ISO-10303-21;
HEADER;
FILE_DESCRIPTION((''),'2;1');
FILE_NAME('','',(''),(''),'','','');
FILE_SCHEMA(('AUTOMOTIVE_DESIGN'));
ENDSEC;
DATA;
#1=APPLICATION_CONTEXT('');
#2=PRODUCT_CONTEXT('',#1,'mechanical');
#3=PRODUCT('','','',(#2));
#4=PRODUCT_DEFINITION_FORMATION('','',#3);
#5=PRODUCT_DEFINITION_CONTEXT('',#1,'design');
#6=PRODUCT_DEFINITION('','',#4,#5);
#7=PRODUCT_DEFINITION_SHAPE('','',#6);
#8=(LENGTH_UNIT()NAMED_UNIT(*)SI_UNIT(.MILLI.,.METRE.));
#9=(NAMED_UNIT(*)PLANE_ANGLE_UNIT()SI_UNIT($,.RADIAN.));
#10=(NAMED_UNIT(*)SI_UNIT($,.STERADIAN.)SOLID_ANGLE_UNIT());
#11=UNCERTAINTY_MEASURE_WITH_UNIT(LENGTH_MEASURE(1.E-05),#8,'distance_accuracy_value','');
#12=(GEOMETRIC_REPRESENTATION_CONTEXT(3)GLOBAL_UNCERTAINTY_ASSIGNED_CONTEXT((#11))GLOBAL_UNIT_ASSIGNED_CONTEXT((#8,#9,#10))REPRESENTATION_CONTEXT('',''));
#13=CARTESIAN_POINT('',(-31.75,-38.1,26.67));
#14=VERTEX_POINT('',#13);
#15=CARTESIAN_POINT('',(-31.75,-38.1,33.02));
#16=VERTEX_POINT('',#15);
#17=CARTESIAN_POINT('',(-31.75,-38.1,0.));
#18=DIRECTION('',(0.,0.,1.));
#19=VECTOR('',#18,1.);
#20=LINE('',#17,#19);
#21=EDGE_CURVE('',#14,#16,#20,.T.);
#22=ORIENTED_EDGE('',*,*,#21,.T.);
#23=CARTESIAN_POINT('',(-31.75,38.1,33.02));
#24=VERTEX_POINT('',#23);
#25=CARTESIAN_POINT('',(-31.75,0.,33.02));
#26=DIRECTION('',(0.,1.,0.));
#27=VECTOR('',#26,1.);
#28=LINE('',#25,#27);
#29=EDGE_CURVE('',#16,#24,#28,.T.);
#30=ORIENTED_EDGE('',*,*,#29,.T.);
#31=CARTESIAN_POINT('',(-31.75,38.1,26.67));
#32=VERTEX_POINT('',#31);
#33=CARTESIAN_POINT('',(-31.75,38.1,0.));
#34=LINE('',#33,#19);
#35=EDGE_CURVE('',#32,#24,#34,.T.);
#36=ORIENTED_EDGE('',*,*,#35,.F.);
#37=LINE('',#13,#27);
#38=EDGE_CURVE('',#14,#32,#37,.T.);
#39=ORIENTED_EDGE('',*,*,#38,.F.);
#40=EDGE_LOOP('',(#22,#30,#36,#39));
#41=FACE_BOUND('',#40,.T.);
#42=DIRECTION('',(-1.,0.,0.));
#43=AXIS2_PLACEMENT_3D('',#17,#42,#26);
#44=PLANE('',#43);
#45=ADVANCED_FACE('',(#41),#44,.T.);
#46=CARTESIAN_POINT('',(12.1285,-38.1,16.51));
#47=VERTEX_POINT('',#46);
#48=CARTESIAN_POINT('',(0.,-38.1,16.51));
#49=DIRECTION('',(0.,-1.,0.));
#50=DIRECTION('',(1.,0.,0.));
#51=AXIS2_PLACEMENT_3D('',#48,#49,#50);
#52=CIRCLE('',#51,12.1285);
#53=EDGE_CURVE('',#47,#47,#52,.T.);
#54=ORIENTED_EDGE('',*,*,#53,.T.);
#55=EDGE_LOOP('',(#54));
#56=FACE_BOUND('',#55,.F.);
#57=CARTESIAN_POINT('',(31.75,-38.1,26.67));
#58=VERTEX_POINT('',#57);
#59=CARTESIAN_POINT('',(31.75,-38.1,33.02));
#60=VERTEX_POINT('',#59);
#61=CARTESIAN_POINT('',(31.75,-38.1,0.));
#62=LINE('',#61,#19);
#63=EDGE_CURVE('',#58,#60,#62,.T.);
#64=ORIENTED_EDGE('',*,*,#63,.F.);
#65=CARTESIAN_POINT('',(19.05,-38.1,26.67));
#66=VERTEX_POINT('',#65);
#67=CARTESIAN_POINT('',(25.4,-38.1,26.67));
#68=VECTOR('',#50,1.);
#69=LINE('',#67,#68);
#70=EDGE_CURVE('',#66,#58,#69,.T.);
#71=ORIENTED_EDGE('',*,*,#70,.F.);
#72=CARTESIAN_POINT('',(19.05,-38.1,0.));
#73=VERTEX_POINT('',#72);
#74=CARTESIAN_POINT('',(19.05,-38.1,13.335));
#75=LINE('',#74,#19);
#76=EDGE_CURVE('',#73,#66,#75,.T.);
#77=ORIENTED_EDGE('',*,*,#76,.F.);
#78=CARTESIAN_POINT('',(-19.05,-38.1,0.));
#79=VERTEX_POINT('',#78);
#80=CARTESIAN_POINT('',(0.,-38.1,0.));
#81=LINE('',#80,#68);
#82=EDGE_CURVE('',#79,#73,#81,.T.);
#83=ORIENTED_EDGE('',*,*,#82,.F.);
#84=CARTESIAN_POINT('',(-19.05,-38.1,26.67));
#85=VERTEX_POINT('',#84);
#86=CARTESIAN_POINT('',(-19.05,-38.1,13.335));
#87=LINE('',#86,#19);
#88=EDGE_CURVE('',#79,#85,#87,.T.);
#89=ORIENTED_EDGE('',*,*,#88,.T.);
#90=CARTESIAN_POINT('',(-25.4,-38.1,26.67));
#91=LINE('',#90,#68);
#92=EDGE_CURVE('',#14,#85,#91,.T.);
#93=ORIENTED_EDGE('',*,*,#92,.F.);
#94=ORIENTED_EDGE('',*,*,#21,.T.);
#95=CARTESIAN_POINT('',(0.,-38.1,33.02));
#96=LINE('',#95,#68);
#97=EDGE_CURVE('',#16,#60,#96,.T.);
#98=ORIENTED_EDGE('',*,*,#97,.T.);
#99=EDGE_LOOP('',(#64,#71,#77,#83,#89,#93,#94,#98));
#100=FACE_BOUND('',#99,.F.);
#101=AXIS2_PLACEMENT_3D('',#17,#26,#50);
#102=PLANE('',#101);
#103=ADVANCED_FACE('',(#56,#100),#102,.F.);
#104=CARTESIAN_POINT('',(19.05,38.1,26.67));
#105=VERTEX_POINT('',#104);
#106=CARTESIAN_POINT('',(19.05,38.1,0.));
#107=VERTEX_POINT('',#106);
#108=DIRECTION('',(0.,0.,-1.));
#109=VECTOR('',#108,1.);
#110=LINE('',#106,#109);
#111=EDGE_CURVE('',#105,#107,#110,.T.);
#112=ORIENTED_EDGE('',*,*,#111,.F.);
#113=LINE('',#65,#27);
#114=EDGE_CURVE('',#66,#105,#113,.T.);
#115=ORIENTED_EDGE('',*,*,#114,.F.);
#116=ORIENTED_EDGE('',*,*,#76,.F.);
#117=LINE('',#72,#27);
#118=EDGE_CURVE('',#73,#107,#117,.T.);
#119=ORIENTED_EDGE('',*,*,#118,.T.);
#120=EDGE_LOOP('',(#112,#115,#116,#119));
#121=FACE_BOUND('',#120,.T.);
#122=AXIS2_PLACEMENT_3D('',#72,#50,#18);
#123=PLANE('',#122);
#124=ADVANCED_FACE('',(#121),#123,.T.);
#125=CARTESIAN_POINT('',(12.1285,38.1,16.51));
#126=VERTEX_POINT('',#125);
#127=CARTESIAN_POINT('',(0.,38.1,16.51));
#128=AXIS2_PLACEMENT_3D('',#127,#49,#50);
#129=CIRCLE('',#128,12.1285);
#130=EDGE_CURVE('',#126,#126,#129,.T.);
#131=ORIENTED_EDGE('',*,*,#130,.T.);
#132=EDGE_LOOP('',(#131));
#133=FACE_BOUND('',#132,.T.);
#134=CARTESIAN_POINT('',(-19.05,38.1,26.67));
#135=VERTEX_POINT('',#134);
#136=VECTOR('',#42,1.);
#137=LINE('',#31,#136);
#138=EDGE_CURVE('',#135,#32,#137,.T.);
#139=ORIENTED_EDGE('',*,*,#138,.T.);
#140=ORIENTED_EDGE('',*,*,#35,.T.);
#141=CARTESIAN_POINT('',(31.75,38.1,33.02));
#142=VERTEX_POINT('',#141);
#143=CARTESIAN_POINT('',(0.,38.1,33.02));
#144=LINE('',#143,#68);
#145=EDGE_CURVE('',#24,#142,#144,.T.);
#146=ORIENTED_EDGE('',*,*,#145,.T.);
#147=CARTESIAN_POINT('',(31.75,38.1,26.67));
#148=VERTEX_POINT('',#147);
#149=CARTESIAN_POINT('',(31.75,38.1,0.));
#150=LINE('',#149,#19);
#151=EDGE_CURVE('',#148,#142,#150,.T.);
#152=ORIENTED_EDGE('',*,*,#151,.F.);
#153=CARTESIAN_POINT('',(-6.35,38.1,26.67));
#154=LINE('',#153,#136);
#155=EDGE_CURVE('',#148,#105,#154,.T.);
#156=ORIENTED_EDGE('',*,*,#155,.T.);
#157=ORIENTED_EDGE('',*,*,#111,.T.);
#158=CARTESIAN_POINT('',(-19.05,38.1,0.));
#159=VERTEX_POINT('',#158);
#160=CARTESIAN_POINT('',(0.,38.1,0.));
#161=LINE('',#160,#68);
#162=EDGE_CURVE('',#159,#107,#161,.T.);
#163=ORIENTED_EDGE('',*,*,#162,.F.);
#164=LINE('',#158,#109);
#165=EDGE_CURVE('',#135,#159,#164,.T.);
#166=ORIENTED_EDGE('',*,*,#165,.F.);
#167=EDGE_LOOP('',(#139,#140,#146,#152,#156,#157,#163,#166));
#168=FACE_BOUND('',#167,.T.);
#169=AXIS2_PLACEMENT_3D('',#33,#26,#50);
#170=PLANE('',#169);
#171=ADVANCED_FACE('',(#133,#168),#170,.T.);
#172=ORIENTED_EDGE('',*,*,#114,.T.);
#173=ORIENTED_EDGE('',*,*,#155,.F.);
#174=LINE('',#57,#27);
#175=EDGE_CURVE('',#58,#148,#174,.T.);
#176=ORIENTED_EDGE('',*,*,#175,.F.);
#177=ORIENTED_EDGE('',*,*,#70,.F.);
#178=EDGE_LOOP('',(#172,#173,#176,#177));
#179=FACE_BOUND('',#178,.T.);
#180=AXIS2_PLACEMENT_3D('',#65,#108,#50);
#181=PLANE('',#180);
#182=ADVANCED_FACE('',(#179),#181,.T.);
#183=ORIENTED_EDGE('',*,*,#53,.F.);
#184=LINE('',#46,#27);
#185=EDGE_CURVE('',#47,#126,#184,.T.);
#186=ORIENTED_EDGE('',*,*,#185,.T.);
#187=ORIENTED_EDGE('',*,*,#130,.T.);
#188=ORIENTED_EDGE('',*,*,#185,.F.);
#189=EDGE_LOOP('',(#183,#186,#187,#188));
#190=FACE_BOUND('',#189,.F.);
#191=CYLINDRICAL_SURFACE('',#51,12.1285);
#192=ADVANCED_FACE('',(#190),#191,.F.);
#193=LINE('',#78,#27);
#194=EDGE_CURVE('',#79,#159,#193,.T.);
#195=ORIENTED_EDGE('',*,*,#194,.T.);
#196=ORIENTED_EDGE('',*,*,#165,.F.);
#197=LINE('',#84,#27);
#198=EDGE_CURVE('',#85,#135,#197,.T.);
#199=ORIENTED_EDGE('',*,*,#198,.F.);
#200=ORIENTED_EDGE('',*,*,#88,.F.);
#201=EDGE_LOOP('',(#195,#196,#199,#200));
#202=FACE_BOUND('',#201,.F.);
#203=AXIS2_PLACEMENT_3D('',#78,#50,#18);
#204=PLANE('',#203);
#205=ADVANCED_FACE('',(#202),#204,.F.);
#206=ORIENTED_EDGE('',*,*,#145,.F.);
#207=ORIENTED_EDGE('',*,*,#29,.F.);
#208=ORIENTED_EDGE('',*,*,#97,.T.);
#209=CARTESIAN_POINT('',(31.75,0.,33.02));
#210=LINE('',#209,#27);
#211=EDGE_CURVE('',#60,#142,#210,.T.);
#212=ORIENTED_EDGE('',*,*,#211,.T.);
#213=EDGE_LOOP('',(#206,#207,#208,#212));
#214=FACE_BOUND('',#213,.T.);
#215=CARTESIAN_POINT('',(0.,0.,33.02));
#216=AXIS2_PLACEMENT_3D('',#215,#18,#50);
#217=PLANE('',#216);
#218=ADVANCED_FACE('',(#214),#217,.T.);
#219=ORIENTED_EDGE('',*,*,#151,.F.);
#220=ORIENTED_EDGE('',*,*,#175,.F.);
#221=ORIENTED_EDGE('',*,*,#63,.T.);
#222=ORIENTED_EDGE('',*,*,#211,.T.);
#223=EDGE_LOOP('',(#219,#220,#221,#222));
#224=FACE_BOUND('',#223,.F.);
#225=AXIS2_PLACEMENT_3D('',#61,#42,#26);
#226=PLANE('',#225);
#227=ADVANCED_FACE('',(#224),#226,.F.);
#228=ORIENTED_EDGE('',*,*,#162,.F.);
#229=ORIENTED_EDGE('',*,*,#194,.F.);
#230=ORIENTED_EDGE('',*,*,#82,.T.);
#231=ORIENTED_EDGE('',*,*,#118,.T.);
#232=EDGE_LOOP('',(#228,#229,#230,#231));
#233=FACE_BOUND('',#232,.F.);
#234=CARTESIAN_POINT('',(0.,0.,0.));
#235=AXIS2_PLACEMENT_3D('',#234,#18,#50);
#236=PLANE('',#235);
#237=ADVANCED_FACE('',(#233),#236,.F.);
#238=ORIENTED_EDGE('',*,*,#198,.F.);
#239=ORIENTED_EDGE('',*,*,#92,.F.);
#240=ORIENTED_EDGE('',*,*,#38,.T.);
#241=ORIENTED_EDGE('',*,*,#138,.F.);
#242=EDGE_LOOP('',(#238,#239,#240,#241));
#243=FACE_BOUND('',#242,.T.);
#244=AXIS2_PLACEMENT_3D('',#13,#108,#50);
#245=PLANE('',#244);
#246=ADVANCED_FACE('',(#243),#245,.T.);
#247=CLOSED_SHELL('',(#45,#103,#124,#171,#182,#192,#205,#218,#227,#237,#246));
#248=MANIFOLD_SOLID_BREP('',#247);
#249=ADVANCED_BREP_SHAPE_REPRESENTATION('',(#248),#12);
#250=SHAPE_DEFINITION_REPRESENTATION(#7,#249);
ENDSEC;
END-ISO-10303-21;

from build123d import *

# Parameters (mm, degrees)
F0_W     = 63.5
F0_H     = 76.2
F1_DEPTH = 33.02
F2_R     = 12.1285
F3_DEPTH = 100.076
F4_W     = 12.7
F4_H     = 26.67
F5_DEPTH = 76.201


# Not quite as in the source:
# - a feature names something its author has since deleted; it is built from what else it names


with BuildPart() as f1:
    # F0 (on Top) → F1 (new body)
    with BuildSketch(Plane.XY):
        Rectangle(F0_W, F0_H)
    extrude(amount=F1_DEPTH)

    # F2 (on face) → F3 (cut)
    with BuildSketch(Plane.XZ.offset(38.1)):
        with Locations((0, 16.51)):
            Circle(F2_R)
    extrude(amount=-F3_DEPTH, mode=Mode.SUBTRACT)

    # F4 (on face) → F5 (cut, through all)
    with BuildSketch(Plane.XZ.offset(38.1)):
        with Locations((25.4, 13.335)):
            Rectangle(F4_W, F4_H)
        with Locations((-25.4, 13.335)):
            Rectangle(F4_W, F4_H)
    extrude(amount=-F5_DEPTH, mode=Mode.SUBTRACT)


solid = f1.part
